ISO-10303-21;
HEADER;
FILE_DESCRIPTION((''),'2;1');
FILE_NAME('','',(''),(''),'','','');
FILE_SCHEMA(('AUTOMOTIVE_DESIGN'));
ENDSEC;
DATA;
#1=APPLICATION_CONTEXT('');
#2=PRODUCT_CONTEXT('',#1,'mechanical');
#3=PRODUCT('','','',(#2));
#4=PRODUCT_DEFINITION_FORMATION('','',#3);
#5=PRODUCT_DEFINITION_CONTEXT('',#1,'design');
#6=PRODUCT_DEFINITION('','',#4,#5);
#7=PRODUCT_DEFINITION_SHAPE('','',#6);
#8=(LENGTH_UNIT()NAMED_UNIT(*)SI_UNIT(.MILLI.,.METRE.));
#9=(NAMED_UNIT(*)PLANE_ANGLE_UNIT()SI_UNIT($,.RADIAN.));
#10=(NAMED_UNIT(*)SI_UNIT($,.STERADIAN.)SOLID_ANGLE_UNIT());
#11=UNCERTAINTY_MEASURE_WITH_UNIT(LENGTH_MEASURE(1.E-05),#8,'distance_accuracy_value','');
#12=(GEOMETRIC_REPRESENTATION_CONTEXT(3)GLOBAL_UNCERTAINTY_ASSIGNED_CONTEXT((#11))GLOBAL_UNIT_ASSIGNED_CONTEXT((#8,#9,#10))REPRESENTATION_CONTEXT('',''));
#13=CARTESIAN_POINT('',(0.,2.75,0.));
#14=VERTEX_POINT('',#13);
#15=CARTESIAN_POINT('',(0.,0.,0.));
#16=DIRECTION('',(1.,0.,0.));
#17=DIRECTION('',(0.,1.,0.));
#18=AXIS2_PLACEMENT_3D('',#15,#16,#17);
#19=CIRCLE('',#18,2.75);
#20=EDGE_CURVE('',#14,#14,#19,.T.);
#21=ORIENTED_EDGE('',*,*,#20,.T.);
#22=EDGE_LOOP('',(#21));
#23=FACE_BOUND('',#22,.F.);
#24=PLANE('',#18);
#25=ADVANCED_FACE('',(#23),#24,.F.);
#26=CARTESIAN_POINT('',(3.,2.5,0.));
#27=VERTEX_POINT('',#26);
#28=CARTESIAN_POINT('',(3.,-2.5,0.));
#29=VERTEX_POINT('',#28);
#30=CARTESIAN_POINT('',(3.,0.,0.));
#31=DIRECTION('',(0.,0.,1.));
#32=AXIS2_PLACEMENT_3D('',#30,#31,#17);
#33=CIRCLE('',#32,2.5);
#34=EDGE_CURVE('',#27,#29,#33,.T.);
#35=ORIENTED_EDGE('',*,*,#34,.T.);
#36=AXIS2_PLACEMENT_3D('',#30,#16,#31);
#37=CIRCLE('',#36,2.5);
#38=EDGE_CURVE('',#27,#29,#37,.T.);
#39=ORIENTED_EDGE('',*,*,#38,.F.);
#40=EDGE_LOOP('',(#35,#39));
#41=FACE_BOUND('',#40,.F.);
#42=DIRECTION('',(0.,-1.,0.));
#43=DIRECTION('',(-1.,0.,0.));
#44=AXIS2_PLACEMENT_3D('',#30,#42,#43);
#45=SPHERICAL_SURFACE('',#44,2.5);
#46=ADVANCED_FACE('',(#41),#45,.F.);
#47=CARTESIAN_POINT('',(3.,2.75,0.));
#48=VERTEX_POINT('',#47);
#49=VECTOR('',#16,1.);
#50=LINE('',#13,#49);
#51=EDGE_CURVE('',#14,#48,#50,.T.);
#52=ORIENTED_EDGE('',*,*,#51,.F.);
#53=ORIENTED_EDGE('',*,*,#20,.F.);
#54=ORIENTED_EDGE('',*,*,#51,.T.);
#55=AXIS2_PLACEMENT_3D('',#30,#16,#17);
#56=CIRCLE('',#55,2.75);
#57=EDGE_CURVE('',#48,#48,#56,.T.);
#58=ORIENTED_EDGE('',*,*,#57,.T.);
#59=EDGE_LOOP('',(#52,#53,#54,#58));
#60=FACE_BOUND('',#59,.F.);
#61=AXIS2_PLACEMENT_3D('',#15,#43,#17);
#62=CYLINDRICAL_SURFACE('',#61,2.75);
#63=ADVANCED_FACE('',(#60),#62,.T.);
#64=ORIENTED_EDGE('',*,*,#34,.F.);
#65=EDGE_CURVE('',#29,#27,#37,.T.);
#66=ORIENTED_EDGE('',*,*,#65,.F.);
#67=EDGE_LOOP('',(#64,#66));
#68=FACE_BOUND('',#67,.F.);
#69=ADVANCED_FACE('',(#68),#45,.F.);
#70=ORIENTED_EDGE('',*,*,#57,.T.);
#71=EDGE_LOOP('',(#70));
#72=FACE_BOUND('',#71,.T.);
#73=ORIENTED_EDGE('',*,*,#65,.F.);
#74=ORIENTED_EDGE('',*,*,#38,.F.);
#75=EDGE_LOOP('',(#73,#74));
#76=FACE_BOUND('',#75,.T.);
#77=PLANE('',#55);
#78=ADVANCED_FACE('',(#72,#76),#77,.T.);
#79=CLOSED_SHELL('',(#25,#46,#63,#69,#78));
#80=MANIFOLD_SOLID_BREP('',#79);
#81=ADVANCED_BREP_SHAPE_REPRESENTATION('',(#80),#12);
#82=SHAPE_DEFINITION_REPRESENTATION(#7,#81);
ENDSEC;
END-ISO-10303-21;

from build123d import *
from build123d import SkipClean  # not in build123d's __all__

# Parameters (mm, degrees)
F0_R     = 2.75
F1_DEPTH = 3


with BuildPart() as f1:
    # F0 (on Right) → F1 (new body)
    with BuildSketch(Plane.YZ):
        Circle(F0_R)
    extrude(amount=F1_DEPTH)

    # F2 (on Top) → F3 (revolve, cut)
    with BuildSketch(Plane.XY):
        with BuildLine():
            Line((3, -2.5), (3, 2.5))
            ThreePointArc((3, 2.5), (0.5, 0), (3, -2.5))
        make_face()
    with SkipClean():  # cleaning this boolean's faces spoils the solid; the shape is the same uncleaned
        revolve(axis=Axis((3, 0, 0), (0, -1, 0)), mode=Mode.SUBTRACT)


solid = f1.part
